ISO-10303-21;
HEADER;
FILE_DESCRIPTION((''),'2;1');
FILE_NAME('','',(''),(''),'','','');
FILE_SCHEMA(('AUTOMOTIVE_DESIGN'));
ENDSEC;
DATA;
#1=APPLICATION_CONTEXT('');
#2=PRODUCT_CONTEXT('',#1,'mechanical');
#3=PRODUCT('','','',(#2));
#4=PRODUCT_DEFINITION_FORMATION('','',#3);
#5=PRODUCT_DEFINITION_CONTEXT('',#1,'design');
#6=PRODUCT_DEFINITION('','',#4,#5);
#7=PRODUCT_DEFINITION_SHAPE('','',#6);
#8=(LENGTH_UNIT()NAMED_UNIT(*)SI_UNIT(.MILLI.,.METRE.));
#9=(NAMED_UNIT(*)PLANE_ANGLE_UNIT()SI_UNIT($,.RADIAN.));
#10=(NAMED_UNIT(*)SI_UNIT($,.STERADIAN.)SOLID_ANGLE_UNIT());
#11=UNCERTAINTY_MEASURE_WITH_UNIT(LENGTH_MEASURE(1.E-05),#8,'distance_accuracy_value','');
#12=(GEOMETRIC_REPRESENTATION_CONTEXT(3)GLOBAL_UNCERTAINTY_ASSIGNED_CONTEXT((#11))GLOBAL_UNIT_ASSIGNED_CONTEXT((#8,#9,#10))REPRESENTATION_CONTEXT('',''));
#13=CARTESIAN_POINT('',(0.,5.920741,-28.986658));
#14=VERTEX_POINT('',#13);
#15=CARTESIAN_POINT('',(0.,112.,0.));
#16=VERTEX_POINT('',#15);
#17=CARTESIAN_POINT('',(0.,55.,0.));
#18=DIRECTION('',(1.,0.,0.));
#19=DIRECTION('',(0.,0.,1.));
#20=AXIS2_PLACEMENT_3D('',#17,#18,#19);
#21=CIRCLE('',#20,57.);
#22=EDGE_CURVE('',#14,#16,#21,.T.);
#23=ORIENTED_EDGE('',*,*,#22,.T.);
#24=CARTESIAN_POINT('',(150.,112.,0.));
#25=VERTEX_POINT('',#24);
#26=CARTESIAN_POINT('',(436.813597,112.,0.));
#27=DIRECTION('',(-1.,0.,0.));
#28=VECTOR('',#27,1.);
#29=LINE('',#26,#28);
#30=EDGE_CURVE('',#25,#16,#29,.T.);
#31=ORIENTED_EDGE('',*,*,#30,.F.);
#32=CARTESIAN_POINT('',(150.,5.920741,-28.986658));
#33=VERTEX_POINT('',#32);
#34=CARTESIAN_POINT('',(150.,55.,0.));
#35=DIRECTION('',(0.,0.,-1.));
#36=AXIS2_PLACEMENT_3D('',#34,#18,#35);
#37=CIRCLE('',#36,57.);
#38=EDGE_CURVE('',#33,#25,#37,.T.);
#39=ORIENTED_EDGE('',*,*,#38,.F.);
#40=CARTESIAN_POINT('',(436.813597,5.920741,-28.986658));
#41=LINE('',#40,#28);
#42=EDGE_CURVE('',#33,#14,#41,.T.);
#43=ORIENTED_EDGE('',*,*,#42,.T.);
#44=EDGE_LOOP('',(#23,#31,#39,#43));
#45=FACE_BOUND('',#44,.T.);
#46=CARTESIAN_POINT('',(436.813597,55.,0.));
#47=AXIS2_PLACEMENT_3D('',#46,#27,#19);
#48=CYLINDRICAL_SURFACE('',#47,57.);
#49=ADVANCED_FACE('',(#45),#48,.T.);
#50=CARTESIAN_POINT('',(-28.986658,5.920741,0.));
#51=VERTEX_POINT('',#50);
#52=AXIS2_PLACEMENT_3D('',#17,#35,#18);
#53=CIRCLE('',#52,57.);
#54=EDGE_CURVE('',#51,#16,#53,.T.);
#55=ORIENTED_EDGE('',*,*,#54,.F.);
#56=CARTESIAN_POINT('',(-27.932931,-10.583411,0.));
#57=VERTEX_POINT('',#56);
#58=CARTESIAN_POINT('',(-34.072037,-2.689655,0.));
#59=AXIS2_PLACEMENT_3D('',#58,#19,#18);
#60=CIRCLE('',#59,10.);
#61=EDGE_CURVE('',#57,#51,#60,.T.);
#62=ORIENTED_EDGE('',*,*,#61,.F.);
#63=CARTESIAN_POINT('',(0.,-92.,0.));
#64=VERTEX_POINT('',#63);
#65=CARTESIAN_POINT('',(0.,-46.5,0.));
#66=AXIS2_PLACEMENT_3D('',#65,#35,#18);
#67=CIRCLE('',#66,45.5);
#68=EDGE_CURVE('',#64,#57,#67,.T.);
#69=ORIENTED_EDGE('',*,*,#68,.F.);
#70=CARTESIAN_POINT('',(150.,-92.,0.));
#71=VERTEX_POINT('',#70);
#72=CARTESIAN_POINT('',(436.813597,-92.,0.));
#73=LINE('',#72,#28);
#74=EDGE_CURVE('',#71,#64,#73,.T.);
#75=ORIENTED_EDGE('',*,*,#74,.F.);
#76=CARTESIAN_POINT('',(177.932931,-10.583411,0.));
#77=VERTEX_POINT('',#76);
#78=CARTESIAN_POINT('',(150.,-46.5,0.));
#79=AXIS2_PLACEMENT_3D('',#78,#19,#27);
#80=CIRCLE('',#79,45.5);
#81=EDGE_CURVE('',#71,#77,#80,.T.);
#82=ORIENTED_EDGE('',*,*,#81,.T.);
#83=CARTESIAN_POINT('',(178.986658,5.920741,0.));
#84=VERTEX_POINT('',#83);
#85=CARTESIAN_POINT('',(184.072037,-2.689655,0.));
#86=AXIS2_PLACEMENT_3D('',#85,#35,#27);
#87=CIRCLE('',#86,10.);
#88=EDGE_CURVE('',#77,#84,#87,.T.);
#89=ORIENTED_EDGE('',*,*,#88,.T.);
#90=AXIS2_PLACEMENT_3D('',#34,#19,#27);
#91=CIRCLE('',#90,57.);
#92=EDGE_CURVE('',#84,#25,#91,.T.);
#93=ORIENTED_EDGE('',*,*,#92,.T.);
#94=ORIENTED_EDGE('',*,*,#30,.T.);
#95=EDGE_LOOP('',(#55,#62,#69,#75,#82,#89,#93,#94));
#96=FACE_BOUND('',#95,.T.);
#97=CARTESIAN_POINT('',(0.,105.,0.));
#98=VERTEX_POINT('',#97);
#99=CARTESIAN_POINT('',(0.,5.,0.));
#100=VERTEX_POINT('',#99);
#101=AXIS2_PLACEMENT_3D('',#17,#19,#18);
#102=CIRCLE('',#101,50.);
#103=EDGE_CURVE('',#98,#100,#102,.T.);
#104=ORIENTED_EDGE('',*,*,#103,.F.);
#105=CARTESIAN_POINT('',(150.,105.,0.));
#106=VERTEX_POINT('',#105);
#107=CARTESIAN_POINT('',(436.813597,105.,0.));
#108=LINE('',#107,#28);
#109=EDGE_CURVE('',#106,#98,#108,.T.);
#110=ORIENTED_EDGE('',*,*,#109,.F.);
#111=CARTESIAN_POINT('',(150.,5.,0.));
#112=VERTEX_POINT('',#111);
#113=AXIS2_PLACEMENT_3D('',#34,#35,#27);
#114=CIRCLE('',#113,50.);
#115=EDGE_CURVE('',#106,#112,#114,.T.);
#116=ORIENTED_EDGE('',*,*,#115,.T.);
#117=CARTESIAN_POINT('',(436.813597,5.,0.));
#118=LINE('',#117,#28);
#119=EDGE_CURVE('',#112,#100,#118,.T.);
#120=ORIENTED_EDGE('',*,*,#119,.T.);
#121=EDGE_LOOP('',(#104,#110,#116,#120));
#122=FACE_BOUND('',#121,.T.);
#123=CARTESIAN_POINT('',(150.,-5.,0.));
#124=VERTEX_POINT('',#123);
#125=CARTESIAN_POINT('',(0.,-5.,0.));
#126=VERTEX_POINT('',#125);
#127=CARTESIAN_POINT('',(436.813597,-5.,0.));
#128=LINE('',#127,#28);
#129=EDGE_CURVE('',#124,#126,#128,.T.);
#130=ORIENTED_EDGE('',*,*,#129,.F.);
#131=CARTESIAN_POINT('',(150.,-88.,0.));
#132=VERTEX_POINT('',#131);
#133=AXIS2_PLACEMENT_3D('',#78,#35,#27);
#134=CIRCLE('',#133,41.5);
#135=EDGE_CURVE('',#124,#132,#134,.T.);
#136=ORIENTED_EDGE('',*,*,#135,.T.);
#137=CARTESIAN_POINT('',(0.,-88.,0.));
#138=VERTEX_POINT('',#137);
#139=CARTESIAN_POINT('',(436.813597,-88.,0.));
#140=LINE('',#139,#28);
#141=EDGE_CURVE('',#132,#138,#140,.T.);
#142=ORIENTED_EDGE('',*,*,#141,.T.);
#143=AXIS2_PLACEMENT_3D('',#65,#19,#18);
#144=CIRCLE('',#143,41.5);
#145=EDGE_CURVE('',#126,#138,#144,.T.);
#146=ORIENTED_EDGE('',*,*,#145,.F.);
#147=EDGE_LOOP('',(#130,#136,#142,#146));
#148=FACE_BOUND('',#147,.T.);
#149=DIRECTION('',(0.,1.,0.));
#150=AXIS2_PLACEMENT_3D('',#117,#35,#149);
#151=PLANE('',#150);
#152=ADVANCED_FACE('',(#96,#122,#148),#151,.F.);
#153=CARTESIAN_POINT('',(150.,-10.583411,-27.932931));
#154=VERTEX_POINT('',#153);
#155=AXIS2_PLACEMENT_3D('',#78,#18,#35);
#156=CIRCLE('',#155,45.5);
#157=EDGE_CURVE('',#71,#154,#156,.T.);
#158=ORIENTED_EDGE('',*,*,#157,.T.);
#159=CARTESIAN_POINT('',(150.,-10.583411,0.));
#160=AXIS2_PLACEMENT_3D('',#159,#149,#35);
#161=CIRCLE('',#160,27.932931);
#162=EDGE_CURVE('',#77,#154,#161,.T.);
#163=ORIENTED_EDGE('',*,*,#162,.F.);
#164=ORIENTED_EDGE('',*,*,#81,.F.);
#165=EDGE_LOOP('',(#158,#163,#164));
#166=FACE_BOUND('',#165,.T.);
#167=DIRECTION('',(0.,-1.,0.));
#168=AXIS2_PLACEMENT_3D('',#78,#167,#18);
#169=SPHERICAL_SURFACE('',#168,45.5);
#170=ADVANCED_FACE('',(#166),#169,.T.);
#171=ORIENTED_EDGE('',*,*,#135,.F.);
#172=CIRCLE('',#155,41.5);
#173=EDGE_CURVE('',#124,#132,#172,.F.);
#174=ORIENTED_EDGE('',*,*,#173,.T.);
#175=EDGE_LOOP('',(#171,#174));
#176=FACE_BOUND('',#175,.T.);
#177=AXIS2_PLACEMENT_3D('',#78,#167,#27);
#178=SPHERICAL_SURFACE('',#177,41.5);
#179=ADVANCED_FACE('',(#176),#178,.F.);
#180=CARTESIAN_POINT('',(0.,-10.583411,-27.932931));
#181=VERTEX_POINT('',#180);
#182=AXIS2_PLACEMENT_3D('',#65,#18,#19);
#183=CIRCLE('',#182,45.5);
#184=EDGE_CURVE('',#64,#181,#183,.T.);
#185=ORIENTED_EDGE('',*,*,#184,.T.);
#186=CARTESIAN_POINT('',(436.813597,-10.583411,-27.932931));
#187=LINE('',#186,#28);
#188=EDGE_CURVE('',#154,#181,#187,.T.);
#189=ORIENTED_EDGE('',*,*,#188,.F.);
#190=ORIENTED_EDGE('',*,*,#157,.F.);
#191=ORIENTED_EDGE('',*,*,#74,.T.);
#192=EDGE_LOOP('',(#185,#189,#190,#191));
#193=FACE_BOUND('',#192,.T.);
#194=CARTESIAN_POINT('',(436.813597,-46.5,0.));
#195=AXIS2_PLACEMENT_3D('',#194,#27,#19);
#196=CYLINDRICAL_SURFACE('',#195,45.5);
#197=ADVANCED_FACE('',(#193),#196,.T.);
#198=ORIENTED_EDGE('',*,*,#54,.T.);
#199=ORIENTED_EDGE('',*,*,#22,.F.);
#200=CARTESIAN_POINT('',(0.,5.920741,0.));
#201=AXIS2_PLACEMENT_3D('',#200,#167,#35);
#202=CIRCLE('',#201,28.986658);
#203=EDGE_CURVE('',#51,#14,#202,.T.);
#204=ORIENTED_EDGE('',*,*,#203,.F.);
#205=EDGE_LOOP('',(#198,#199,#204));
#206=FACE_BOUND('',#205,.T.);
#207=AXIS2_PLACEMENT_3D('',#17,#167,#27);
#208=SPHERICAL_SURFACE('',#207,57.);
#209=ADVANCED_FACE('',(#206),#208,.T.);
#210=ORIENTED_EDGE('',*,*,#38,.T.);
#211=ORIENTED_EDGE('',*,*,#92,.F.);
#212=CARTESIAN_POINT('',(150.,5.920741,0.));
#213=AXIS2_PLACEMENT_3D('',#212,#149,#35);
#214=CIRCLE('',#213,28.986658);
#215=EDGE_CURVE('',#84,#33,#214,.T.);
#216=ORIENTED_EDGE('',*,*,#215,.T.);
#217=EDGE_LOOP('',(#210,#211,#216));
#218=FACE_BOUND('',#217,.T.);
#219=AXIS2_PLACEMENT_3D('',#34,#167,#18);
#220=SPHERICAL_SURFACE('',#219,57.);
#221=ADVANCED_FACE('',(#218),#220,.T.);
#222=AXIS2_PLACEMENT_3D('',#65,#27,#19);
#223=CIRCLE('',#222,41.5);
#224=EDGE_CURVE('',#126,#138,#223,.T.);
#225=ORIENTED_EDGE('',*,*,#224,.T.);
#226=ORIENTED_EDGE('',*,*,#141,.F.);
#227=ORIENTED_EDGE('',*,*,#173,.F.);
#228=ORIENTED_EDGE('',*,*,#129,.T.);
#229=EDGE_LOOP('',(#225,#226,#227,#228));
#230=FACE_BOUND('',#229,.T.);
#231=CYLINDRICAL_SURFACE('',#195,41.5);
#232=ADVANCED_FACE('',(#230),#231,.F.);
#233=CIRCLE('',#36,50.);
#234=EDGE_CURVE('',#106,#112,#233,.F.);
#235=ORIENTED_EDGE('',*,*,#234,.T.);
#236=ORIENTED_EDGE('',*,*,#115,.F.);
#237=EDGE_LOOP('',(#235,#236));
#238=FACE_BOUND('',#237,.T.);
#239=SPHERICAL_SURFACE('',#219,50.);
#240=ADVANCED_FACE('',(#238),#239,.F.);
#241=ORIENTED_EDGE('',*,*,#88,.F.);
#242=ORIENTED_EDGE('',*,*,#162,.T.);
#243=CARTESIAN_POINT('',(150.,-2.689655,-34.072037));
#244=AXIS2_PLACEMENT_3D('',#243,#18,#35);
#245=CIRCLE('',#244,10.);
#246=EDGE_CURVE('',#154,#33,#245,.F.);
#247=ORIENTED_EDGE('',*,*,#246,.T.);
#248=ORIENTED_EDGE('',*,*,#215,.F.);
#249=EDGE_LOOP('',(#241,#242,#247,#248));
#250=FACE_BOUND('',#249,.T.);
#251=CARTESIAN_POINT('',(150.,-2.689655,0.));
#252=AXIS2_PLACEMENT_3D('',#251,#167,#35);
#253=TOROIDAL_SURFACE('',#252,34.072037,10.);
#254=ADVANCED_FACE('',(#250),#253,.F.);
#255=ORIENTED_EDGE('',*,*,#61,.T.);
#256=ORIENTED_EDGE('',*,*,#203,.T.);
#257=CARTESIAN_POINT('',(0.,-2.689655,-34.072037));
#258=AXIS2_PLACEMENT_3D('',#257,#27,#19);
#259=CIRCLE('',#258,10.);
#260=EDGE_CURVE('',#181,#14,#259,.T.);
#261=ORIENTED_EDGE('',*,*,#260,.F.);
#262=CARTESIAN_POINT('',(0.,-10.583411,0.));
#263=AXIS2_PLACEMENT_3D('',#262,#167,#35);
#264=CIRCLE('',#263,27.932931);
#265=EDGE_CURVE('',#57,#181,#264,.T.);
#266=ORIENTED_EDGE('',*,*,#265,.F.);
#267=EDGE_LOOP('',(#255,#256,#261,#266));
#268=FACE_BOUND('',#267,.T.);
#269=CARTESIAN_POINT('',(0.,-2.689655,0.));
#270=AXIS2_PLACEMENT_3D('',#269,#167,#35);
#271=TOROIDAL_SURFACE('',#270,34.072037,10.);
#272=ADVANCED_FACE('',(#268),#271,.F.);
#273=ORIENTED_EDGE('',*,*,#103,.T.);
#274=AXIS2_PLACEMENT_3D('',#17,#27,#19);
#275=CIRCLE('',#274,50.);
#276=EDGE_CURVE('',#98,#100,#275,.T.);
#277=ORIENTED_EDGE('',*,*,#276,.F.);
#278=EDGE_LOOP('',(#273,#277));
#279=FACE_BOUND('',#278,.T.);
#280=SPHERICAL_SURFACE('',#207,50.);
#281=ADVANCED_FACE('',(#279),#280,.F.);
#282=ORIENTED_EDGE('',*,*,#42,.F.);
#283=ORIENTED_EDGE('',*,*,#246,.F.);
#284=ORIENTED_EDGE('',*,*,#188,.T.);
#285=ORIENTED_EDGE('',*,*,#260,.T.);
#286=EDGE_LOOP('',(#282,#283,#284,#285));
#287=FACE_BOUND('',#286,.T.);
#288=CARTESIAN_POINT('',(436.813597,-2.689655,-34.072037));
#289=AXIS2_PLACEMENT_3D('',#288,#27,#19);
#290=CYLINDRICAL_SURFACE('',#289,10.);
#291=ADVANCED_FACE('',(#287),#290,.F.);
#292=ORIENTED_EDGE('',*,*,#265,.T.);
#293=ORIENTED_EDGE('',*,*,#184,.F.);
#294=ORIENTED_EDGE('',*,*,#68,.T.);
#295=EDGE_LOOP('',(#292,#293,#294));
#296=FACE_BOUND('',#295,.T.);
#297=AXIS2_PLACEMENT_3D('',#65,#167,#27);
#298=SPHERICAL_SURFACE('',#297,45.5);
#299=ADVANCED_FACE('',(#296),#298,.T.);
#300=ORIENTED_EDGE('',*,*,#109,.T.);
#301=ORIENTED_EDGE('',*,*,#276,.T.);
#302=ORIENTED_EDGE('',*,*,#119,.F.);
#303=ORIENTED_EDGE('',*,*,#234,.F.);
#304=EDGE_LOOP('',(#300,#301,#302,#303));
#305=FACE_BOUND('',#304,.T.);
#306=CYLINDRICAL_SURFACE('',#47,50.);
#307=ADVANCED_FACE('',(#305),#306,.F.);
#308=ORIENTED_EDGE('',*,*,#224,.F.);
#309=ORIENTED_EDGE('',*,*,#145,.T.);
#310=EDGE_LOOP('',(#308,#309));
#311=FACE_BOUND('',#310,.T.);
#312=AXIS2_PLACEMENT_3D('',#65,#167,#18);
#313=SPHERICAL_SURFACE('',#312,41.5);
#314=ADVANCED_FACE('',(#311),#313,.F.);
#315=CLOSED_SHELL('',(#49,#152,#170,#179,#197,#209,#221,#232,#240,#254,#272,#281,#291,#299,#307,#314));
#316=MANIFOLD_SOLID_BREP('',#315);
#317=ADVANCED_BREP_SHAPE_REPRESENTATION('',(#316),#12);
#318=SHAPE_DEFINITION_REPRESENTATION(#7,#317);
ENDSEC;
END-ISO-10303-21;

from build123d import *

# Parameters (mm, degrees)
BOSS_EXTRUDE1_DEPTH = 150
REVOLVE1_ANGLE      = 90
MIRROR1_ANGLE       = 90


# Read off the part's stored shape, not the designer's step: Mirror1
with BuildPart() as part:
    # Sketch2 → Boss-Extrude1 (new body)
    with BuildSketch(Plane(origin=(0, 0, 0), x_dir=(0, 0, -1), z_dir=(1, 0, 0))):
        with BuildLine():
            Line((0, 5), (0, -5))
            ThreePointArc((0, -5), (41.5, -46.5), (0, -88))
            Line((0, -88), (0, -92))
            ThreePointArc((0, -92), (43.037511543, -61.265588379), (27.932931003, -10.583410997))
            ThreePointArc((27.932931003, -10.583410997), (24.092356291, -2.052490679), (28.986658103, 5.920741122))
            ThreePointArc((28.986658103, 5.920741122), (54.98416934, 70.024683756), (0, 112))
            Line((0, 112), (0, 105))
            ThreePointArc((0, 105), (50, 55), (0, 5))
        make_face()
    extrude(amount=BOSS_EXTRUDE1_DEPTH)

    # Sketch2<2> → Revolve1 (revolve)
    with BuildSketch(Plane(origin=(0, 0, 0), x_dir=(0, 0, -1), z_dir=(1, 0, 0))):
        with BuildLine():
            Line((0, 5), (0, -5))
            ThreePointArc((0, -5), (41.5, -46.5), (0, -88))
            Line((0, -88), (0, -92))
            ThreePointArc((0, -92), (43.037511543, -61.265588379), (27.932931003, -10.583410997))
            ThreePointArc((27.932931003, -10.583410997), (24.092356291, -2.052490679), (28.986658103, 5.920741122))
            ThreePointArc((28.986658103, 5.920741122), (54.98416934, 70.024683756), (0, 112))
            Line((0, 112), (0, 105))
            ThreePointArc((0, 105), (50, 55), (0, 5))
        make_face()
    revolve(axis=Axis((0, 105, 0), (0, 1, 0)), revolution_arc=REVOLVE1_ANGLE)

    # Mirror1 outline → Mirror1 (revolve)
    with BuildSketch(Plane(origin=(150, 0, 0), x_dir=(1, 0, 0), z_dir=(0, 0, 1))):
        with BuildLine():
            ThreePointArc((28.986658103, 5.920741122), (54.98416934, 70.024683756), (0, 112))
            Line((0, 112), (0, 105))
            ThreePointArc((0, 105), (50, 55), (0, 5))
            Line((0, 5), (0, -5))
            ThreePointArc((0, -5), (41.5, -46.5), (0, -88))
            Line((0, -88), (0, -92))
            ThreePointArc((0, -92), (43.037511543, -61.265588379), (27.932931003, -10.583410997))
            ThreePointArc((27.932931003, -10.583410997), (24.092356291, -2.052490679), (28.986658103, 5.920741122))
        make_face()
    revolve(axis=Axis((150, 0, 0), (0, 1, 0)), revolution_arc=MIRROR1_ANGLE)


solid = part.part
